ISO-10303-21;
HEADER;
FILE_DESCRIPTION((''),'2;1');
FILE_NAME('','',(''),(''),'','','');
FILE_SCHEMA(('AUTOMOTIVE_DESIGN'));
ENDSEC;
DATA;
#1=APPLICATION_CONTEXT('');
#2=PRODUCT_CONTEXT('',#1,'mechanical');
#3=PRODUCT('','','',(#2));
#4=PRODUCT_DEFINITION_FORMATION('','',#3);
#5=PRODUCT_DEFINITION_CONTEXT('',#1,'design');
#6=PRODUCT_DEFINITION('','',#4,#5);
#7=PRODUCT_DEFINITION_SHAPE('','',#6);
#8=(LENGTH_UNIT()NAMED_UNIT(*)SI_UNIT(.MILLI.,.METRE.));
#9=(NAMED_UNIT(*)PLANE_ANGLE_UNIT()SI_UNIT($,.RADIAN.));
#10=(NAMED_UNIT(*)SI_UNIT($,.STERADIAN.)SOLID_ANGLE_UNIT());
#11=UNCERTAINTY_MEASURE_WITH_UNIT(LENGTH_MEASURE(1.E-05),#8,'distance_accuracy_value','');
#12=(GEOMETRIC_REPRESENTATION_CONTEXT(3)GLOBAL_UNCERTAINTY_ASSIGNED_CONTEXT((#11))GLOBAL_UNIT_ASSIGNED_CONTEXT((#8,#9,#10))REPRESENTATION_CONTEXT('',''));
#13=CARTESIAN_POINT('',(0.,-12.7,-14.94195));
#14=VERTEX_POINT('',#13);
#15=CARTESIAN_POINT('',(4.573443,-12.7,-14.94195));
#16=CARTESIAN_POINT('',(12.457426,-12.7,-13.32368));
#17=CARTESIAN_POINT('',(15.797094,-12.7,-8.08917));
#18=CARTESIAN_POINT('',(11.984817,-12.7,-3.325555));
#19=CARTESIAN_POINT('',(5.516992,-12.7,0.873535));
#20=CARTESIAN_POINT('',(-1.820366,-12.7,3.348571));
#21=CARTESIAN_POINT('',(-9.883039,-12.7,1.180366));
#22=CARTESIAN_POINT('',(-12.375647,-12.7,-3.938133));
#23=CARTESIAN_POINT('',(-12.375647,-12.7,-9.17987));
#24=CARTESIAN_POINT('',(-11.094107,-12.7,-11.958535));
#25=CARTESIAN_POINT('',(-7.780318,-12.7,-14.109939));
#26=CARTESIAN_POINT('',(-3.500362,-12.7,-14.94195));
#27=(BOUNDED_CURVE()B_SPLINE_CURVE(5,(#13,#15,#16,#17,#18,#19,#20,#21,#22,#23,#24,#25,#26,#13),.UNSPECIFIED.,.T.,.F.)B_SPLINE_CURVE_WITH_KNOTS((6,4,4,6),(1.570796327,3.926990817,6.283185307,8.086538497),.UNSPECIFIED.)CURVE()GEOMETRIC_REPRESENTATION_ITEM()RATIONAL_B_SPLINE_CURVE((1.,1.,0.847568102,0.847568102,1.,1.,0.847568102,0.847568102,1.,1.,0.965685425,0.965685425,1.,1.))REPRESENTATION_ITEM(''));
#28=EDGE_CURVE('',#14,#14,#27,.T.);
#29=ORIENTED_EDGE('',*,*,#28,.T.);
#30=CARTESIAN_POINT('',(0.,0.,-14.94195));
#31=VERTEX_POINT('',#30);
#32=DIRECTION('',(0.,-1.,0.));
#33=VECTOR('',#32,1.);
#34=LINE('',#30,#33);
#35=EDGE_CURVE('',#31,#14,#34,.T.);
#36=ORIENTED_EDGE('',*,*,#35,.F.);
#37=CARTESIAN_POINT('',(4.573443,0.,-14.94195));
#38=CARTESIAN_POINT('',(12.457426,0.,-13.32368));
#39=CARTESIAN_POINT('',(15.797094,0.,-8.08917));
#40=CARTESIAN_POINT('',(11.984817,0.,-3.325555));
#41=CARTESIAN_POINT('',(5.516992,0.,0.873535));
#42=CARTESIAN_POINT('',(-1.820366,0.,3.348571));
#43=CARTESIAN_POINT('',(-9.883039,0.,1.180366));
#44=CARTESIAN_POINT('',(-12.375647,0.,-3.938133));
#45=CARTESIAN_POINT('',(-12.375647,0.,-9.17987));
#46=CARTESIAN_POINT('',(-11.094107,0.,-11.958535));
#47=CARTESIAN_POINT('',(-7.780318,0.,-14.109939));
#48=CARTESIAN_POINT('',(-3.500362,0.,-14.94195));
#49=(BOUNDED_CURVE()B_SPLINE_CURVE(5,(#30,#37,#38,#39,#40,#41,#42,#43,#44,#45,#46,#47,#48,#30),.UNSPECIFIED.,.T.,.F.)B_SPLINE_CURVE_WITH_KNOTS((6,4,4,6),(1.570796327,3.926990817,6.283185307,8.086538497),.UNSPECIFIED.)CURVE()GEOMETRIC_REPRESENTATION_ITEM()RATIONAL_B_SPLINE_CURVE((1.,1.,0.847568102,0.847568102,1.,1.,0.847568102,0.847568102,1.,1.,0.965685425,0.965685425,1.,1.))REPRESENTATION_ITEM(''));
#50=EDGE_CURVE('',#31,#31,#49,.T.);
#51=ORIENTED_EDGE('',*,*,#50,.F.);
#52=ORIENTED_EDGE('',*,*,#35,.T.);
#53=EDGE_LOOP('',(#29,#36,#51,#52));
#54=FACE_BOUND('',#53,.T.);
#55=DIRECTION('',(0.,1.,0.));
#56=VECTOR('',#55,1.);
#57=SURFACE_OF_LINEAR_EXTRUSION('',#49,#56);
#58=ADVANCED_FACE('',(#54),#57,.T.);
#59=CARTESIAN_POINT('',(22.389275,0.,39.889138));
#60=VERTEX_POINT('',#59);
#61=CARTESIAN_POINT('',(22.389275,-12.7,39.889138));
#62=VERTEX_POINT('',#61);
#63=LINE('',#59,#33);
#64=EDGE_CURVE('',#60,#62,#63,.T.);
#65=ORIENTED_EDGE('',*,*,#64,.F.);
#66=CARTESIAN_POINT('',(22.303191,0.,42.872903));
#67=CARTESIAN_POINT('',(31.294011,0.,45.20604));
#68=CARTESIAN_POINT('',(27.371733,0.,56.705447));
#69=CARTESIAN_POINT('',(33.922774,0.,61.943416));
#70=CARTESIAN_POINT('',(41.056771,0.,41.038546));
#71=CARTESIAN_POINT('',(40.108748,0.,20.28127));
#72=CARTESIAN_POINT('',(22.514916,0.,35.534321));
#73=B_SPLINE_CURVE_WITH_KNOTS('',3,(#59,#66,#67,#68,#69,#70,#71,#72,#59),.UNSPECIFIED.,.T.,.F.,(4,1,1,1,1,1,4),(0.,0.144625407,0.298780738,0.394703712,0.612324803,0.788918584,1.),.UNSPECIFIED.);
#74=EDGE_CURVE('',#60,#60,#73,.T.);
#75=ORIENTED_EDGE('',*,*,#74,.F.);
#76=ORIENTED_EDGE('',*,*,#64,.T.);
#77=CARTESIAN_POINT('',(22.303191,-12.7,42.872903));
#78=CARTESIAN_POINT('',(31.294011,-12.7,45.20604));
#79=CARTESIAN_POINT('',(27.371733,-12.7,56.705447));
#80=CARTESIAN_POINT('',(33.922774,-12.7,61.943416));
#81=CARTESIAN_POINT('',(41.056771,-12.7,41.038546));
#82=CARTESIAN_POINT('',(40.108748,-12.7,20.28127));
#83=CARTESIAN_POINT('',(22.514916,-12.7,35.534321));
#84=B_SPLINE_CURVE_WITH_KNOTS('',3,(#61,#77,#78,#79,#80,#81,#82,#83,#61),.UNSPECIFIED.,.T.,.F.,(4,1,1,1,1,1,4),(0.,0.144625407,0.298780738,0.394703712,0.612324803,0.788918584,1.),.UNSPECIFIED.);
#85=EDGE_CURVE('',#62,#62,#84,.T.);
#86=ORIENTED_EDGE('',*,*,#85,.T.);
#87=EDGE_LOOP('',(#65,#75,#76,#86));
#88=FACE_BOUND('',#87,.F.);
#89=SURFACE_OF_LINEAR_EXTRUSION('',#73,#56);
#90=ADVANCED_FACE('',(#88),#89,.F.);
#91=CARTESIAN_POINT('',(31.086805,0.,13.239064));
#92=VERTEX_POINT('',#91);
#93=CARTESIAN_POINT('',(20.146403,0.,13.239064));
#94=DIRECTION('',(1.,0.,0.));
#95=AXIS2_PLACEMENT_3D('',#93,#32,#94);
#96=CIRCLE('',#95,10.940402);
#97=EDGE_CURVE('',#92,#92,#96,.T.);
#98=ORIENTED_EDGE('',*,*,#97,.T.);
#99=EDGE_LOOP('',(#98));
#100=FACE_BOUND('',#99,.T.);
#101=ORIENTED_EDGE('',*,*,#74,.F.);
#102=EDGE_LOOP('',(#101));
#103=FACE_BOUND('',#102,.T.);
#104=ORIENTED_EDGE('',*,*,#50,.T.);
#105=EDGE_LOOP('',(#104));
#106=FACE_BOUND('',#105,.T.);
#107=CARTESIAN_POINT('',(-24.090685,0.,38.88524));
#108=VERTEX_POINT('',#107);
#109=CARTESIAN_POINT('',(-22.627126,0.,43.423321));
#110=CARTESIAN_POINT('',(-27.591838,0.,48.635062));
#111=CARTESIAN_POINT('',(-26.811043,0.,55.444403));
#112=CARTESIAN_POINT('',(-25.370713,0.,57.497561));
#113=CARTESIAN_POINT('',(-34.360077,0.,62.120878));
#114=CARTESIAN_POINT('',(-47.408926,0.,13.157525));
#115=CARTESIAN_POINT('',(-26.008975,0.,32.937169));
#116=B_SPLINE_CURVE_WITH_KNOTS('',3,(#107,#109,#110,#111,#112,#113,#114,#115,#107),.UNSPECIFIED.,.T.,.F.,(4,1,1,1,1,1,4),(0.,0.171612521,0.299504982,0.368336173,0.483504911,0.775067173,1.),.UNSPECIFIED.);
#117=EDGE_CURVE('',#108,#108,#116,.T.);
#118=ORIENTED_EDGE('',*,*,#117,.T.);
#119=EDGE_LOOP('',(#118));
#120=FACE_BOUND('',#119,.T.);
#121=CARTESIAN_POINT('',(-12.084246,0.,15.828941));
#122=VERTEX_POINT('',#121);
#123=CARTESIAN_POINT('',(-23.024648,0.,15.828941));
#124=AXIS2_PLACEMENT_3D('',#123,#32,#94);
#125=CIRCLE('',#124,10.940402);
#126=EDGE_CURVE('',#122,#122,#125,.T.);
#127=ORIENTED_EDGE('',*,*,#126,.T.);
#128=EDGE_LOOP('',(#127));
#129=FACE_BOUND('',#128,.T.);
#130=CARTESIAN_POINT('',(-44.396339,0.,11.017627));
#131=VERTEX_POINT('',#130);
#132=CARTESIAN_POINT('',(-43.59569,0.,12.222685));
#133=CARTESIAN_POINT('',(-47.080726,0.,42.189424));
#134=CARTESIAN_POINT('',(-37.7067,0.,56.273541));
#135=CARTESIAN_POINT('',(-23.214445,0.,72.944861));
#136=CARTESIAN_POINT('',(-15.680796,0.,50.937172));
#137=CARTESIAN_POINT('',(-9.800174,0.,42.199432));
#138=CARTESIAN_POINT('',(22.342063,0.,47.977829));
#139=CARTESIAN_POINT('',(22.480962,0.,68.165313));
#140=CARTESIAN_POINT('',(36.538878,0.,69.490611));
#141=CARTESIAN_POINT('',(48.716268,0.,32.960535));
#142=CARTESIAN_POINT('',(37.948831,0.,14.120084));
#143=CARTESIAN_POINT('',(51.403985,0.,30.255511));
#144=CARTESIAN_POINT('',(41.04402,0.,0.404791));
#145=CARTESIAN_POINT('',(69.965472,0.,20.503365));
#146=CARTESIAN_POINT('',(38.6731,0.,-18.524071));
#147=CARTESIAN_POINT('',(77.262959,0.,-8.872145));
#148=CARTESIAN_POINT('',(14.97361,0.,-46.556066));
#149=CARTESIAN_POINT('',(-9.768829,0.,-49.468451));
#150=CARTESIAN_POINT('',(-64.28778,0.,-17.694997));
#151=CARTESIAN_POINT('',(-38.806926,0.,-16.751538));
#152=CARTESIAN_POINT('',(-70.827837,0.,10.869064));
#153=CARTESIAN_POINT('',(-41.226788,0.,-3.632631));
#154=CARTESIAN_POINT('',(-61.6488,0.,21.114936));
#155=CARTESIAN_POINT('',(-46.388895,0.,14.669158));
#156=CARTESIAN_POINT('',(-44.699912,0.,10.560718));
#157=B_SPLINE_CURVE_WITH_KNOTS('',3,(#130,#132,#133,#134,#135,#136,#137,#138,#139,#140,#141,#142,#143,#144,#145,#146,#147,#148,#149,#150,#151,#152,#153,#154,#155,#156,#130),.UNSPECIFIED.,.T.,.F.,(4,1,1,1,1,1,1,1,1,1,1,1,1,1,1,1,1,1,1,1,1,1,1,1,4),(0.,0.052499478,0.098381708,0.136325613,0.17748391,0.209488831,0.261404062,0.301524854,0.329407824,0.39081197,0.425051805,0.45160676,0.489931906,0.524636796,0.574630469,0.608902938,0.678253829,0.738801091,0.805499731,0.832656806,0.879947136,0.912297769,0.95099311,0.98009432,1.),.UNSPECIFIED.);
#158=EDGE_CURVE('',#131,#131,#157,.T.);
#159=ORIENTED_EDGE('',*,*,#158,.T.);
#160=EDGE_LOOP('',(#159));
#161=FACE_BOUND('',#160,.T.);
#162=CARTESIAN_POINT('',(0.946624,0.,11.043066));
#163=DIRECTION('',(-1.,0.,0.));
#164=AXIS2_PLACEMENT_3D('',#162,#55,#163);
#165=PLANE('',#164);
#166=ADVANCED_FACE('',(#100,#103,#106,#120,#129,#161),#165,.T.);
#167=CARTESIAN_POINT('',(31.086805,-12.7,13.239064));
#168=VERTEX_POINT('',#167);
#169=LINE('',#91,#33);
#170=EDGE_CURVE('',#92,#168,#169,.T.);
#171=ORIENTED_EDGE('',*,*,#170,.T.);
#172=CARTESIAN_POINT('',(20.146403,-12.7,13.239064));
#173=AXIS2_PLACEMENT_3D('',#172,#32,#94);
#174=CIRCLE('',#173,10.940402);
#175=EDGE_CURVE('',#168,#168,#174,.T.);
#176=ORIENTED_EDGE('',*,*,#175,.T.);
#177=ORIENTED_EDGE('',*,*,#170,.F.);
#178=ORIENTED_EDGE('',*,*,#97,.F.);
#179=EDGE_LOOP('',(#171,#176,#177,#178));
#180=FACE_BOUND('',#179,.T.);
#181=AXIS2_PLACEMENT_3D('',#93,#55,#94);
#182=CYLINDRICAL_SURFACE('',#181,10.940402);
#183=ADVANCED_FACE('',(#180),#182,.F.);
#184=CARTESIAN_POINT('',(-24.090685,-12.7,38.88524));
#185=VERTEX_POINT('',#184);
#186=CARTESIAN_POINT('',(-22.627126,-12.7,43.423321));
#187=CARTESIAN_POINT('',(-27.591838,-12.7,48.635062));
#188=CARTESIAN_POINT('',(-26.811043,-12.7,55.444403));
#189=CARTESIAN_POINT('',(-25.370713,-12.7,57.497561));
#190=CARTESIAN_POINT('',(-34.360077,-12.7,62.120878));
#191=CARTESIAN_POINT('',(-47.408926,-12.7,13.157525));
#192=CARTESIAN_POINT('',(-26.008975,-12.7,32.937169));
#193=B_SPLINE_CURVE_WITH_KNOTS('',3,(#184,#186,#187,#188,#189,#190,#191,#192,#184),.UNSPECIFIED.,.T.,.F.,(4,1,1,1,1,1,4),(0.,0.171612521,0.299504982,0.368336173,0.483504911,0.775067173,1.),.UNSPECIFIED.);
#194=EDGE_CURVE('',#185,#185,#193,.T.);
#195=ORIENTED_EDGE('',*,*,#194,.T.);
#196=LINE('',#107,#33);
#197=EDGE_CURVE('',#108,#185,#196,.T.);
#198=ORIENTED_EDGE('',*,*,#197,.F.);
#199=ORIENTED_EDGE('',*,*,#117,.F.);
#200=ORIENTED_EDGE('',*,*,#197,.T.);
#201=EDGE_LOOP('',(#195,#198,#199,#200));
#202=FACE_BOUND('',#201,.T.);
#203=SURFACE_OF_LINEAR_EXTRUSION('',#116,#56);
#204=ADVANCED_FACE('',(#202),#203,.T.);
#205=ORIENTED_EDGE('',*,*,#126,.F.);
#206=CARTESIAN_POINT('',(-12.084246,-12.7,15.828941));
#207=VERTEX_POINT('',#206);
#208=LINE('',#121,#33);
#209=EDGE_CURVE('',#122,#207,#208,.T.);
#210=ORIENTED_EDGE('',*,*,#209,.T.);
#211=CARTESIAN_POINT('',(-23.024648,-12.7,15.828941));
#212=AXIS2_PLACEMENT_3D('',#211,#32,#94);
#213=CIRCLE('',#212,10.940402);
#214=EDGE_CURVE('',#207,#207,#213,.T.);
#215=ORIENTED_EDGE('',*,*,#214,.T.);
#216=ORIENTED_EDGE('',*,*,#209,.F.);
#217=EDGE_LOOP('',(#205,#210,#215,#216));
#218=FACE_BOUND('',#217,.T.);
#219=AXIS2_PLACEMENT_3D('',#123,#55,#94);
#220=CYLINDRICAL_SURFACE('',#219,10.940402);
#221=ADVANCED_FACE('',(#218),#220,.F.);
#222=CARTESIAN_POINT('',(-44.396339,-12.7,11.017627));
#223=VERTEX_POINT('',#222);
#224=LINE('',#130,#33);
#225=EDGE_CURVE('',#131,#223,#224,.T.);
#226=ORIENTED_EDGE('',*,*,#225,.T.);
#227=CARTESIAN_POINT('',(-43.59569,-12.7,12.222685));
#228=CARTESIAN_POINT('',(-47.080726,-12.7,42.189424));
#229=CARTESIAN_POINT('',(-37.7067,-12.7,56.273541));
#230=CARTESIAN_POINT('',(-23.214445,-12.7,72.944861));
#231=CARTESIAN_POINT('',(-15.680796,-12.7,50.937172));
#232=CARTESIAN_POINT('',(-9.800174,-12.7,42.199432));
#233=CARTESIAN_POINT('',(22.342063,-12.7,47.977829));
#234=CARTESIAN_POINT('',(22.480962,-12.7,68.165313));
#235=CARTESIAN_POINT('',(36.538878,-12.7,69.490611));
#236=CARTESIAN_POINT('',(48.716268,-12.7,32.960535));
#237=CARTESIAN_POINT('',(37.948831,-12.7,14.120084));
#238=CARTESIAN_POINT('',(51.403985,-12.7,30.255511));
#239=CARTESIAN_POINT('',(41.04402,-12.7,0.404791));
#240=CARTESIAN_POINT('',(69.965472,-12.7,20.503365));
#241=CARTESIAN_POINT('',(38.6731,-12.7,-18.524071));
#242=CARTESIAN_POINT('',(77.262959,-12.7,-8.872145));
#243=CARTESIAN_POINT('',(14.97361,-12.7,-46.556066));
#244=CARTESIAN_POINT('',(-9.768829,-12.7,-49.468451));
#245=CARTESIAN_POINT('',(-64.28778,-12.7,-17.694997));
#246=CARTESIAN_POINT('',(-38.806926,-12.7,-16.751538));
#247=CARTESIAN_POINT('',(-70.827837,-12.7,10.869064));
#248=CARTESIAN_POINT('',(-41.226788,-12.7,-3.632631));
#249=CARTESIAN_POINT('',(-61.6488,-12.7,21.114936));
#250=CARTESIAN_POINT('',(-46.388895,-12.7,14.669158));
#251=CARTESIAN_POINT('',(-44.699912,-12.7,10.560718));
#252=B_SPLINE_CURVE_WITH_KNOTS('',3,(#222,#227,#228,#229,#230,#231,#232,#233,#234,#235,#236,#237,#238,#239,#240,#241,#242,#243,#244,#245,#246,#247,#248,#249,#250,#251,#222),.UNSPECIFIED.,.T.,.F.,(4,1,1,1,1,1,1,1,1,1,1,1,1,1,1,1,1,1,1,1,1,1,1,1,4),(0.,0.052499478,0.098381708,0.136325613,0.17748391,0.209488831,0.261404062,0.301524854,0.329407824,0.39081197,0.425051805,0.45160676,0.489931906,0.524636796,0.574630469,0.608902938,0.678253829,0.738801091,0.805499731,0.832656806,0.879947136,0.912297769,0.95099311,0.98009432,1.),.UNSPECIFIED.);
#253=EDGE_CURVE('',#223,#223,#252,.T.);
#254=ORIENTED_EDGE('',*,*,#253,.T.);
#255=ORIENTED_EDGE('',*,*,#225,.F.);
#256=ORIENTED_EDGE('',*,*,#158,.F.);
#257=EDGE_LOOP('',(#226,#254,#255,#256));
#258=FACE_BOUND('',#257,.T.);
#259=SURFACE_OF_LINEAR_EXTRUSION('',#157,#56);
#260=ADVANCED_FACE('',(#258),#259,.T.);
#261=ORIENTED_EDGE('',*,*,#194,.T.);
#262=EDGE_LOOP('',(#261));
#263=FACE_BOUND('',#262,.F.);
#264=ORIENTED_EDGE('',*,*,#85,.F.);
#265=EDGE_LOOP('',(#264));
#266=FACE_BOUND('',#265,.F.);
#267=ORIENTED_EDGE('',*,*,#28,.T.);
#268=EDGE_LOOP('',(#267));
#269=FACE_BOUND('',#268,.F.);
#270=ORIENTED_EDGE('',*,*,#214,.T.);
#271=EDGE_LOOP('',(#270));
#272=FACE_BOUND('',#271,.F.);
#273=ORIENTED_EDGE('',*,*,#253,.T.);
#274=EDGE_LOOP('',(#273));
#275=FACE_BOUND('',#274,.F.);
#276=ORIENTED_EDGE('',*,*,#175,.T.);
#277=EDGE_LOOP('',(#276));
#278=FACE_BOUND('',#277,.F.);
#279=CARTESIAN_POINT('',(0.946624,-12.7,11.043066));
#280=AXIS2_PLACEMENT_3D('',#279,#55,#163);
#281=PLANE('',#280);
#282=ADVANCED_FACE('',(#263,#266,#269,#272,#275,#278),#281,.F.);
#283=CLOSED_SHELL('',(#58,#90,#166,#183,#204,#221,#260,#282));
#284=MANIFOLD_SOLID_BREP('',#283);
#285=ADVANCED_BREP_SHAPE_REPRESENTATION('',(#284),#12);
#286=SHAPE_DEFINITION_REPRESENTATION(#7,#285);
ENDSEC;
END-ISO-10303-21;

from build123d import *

# Parameters (mm, degrees)
F0_R     = 10.9404020296
F3_DEPTH = 12.7


# Not quite as in the source:
# - a feature of the source that left no trace in its solid (it failed there, or was rolled back) is left out


with BuildPart() as f3:
    # F0 (on Front) → F3 (new body)
    with BuildSketch(Plane.XZ):
        with BuildLine():
            add(Edge.make_bspline(
                [(-44.3963385475, 11.0176274683), (-43.5956904498, 12.2226852091), (-47.0807262057, 42.1894243845), (-37.7066996439, 56.2735408751), (-23.2144452715, 72.944861215), (-15.6807960515, 50.9371724364), (-9.8001740811, 42.1994319683), (22.3420627671, 47.9778289448), (22.4809617418, 68.1653128947), (36.5388778271, 69.4906114026), (48.7162678599, 32.960535246), (37.9488306631, 14.1200838192), (51.4039847015, 30.2555110719), (41.0440196393, 0.404790861), (69.9654721483, 20.5033650724), (38.6730995153, -18.5240711957), (77.2629587468, -8.872144765), (14.9736101781, -46.5560659508), (-9.7688291438, -49.4684506631), (-64.2877801424, -17.694996921), (-38.806925616, -16.7515375496), (-70.8278372437, 10.869064196), (-41.2267882542, -3.6326312985), (-61.6487998945, 21.1149363264), (-46.3888953433, 14.6691576653), (-44.6999119452, 10.5607182794), (-44.3963385475, 11.0176274683)],
                knots=[0, 0, 0, 0, 0.0524994782, 0.0983817078, 0.1363256126, 0.1774839098, 0.2094888309, 0.261404062, 0.3015248535, 0.3294078242, 0.3908119696, 0.4250518051, 0.4516067603, 0.4899319062, 0.5246367957, 0.5746304686, 0.608902938, 0.6782538291, 0.7388010908, 0.8054997312, 0.8326568059, 0.8799471359, 0.912297769, 0.9509931096, 0.9800943198, 1, 1, 1, 1], degree=3))
        make_face()
        with BuildLine():
            add(Edge.make_bspline(
                [(-12.3756472021, -6.9073382765), (-12.3756472021, -14.9419499698), (0, -14.9419499698)],
                knots=[0, 0, 0, 1.5707963268, 1.5707963268, 1.5707963268], degree=2, weights=[1, 0.7071067812, 1]))
            add(Edge.make_bspline(
                [(0, -14.9419499698), (29.8774553185, -14.9419499698), (8.7509040582, -1.226009864), (-12.3756472021, 12.4899302418), (-12.3756472021, -6.9073382765)],
                knots=[1.5707963268, 1.5707963268, 1.5707963268, 3.926990817, 3.926990817, 6.2831853072, 6.2831853072, 6.2831853072], degree=2, weights=[1, 0.3826834324, 1, 0.3826834324, 1]))
        make_face(mode=Mode.SUBTRACT)
        with BuildLine():
            add(Edge.make_bspline(
                [(-24.0906851895, 38.8852398546), (-22.6271256395, 43.4233212193), (-27.5918384294, 48.6350615893), (-26.8110432735, 55.444402584), (-25.3707126452, 57.4975608293), (-34.3600765379, 62.120877975), (-47.4089262083, 13.1575254952), (-26.0089752136, 32.9371687903), (-24.0906851895, 38.8852398546)],
                knots=[0, 0, 0, 0, 0.1716125209, 0.2995049816, 0.3683361725, 0.483504911, 0.7750671731, 1, 1, 1, 1], degree=3))
        make_face(mode=Mode.SUBTRACT)
        with Locations((-23.024648428, 15.8289410174)):
            Circle(F0_R, mode=Mode.SUBTRACT)
        with Locations((20.1464034617, 13.2390642539)):
            Circle(F0_R, mode=Mode.SUBTRACT)
        with BuildLine():
            add(Edge.make_bspline(
                [(22.3892752205, 39.8891382027), (22.303190844, 42.8729025083), (31.2940107754, 45.2060403839), (27.3717334541, 56.7054467821), (33.922773798, 61.9434163354), (41.0567706657, 41.0385457672), (40.1087481888, 20.281270185), (22.514915746, 35.5343210966), (22.3892752205, 39.8891382027)],
                knots=[0, 0, 0, 0, 0.1446254066, 0.2987807385, 0.3947037119, 0.6123248029, 0.788918584, 1, 1, 1, 1], degree=3))
        make_face(mode=Mode.SUBTRACT)
    extrude(amount=F3_DEPTH)


solid = f3.part
